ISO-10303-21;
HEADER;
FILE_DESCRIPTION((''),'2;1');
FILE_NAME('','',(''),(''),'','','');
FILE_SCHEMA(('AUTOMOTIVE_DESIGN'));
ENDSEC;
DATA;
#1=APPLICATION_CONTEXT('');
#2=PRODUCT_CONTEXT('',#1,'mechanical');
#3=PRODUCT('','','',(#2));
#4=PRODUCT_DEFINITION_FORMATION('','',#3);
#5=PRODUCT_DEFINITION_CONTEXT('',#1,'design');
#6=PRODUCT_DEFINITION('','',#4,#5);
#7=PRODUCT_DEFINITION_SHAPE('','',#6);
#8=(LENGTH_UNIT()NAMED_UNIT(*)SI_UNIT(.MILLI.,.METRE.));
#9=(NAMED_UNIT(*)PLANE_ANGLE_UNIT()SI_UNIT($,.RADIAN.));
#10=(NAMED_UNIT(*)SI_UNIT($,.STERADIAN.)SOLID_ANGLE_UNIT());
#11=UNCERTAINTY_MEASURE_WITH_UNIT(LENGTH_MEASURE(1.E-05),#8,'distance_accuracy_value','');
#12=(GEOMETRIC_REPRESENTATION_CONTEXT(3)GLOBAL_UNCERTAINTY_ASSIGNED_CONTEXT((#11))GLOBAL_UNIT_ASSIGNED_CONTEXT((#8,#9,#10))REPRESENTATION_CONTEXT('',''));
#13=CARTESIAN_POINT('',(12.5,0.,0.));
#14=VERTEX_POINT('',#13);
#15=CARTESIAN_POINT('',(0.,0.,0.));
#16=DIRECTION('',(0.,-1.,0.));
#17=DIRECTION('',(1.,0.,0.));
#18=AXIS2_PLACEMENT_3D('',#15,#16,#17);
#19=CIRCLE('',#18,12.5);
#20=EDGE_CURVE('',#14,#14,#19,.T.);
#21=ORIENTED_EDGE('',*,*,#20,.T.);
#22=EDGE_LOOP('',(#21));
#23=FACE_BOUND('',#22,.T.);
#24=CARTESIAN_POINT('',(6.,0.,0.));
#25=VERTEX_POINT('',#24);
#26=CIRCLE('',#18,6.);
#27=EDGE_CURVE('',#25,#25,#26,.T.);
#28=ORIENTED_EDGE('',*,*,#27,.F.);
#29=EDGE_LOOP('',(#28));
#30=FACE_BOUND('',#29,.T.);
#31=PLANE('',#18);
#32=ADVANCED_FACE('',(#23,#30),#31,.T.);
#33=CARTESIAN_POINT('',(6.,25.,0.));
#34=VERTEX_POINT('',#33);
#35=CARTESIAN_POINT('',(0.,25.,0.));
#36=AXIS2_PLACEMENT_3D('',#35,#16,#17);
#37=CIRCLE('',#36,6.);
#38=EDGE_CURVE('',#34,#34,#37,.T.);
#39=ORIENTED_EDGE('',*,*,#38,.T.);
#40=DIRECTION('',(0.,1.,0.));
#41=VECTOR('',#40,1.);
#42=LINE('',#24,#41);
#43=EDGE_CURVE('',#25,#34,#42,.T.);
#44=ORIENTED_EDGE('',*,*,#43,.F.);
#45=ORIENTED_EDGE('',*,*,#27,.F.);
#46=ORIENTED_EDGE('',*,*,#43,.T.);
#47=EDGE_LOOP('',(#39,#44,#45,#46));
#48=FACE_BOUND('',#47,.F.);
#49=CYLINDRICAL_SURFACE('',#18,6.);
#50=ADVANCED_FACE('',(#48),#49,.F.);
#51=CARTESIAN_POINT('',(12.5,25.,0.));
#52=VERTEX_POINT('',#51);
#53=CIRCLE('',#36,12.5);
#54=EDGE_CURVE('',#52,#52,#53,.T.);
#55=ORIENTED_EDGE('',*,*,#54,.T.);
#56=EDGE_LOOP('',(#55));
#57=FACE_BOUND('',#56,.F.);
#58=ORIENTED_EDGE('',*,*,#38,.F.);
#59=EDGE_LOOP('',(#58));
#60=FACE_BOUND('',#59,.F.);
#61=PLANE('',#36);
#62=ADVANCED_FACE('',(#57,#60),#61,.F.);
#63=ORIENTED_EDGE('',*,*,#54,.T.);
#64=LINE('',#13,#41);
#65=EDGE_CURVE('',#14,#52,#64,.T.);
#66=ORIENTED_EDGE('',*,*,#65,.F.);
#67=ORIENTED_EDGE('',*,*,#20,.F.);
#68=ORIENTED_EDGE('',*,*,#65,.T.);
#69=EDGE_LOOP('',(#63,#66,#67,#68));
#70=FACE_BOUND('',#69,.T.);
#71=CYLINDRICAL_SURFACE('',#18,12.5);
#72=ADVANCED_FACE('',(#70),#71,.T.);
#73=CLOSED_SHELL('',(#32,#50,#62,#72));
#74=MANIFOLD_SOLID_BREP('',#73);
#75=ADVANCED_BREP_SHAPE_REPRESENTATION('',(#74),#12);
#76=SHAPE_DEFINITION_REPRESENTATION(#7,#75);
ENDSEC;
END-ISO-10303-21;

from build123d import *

# Parameters (mm, degrees)
F1_R     = 12.5
F1_R_2   = 6
F2_DEPTH = 25


# Not quite as in the source:
# - a feature names something its author has since deleted; it is built from what else it names


with BuildPart() as f2:
    # F1 (on Front) → F2 (new body)
    with BuildSketch(Plane.XZ):
        Circle(F1_R)
        Circle(F1_R_2, mode=Mode.SUBTRACT)
    extrude(amount=-F2_DEPTH)


solid = f2.part
